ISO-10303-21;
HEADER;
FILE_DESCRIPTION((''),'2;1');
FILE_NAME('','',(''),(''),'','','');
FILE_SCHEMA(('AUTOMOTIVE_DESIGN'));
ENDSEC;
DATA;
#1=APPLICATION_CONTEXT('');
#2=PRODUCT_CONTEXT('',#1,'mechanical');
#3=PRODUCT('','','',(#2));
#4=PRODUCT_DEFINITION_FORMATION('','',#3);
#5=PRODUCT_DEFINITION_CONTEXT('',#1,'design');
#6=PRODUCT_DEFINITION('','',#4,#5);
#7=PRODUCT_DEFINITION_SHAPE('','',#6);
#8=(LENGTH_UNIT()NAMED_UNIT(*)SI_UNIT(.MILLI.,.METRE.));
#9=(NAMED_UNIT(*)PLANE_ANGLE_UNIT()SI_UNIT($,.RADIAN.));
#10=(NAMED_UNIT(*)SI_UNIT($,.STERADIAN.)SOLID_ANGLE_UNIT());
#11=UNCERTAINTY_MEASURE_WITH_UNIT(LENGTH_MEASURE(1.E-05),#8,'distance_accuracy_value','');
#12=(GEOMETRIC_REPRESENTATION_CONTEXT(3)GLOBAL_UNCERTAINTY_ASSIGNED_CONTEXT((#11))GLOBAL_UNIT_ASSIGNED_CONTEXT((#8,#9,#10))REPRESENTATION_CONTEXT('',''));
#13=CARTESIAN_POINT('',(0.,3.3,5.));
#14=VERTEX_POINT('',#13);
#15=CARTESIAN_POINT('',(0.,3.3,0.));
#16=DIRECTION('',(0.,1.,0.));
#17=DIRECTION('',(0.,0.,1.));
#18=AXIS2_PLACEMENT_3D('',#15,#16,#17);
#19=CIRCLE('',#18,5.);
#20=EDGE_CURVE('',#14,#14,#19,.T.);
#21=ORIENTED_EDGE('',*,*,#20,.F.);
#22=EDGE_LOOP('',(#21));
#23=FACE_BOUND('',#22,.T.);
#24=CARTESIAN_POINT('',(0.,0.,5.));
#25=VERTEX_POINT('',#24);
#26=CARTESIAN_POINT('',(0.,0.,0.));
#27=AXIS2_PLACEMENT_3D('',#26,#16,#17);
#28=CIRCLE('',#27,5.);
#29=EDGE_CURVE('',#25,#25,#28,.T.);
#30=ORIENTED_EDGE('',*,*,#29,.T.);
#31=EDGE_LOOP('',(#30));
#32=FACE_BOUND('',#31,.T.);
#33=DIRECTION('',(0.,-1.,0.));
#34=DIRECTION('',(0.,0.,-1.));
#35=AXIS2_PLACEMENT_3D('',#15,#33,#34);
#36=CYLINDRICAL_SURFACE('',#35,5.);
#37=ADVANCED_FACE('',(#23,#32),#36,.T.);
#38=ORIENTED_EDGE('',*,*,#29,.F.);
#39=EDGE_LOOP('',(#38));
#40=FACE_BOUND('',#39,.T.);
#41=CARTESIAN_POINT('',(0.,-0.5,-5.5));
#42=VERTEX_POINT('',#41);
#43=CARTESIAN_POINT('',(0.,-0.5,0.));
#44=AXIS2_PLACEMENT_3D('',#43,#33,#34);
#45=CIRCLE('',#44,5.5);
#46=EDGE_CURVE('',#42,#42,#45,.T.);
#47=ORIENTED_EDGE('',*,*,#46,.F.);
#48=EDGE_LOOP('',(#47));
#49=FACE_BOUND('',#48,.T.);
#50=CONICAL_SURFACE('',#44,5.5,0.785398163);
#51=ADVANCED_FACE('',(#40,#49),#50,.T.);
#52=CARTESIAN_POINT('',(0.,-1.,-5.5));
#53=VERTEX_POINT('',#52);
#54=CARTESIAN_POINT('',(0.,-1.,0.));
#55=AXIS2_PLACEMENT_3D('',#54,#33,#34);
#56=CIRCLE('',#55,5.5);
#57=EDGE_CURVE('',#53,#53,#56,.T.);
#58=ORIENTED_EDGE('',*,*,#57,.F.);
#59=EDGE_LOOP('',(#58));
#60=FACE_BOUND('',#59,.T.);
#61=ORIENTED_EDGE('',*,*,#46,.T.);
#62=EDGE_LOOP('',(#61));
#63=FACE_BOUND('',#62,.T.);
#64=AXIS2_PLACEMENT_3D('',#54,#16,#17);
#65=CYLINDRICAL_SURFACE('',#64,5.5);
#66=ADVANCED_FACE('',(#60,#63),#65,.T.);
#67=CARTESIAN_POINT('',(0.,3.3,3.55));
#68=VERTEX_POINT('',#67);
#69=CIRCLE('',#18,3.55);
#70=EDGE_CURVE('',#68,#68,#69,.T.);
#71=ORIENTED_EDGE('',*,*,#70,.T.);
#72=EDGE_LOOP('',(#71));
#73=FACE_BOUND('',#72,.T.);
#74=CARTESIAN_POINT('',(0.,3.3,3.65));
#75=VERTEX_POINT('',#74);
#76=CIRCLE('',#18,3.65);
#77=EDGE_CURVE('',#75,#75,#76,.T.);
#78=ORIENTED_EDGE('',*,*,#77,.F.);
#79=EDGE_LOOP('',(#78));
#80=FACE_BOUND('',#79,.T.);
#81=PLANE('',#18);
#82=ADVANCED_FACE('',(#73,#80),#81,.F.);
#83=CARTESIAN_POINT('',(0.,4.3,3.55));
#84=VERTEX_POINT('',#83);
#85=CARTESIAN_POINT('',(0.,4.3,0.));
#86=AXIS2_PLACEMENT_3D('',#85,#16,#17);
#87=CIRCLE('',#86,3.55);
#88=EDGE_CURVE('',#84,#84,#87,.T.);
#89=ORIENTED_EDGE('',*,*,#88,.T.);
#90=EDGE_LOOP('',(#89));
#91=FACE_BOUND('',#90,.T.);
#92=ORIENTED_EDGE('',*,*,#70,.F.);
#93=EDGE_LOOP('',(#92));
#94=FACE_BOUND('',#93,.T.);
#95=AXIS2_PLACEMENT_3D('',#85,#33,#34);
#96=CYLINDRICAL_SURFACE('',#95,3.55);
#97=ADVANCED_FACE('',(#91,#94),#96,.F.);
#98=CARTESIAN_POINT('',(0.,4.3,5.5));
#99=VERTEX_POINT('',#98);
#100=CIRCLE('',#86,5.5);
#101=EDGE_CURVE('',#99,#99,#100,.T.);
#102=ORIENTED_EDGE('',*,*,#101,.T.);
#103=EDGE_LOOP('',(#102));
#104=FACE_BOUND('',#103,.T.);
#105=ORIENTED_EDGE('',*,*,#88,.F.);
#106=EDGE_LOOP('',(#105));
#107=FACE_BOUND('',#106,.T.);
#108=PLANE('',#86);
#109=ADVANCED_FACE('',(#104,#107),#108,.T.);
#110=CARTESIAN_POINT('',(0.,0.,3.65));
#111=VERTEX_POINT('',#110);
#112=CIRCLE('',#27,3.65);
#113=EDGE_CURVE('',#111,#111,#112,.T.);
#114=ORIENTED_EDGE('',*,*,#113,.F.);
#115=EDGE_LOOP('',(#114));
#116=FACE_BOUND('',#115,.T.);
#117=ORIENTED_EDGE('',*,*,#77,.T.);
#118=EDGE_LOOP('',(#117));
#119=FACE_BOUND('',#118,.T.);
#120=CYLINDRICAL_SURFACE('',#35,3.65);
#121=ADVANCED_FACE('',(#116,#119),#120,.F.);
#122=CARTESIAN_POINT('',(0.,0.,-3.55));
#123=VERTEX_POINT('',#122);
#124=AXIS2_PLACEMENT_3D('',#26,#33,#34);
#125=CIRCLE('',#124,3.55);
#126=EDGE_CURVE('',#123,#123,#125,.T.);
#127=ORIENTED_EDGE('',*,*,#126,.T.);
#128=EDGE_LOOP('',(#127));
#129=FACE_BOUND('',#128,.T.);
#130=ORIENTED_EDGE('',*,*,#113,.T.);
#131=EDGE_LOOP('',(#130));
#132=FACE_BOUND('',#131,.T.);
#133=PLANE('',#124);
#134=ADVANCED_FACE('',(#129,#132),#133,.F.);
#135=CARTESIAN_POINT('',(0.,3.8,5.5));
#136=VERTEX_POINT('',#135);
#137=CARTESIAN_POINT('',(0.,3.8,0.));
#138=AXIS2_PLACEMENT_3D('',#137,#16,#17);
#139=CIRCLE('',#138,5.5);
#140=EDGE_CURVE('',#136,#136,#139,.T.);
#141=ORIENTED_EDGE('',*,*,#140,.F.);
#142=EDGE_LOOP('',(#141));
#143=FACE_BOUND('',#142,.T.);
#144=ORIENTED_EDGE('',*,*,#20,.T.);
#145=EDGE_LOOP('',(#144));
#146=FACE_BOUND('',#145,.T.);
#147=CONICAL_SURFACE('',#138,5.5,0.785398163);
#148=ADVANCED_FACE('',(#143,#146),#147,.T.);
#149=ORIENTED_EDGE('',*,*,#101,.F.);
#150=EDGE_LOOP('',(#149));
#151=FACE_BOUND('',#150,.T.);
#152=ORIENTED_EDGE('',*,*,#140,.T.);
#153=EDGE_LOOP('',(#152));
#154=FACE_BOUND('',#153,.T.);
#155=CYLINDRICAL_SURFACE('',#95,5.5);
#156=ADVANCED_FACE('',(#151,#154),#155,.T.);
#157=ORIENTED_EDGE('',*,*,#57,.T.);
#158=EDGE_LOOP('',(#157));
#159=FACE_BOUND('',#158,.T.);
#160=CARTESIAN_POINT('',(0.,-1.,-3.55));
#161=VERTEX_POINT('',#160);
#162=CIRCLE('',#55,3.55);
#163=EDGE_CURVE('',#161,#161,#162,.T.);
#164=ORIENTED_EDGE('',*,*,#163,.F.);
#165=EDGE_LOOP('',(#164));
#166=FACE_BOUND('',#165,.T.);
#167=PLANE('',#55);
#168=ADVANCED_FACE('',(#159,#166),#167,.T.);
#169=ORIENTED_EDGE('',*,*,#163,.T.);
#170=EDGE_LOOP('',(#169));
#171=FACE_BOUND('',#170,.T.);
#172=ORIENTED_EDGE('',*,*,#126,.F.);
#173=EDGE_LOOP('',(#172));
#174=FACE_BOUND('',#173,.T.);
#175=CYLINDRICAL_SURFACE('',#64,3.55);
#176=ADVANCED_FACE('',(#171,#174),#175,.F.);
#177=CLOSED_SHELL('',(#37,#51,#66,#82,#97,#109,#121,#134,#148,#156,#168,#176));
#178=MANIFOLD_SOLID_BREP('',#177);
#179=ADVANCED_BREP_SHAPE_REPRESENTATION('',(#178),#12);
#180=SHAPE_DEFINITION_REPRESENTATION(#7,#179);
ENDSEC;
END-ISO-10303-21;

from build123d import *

# Parameters (mm, degrees)
SKETCH_1_R      = 5
SKETCH_1_R_2    = 3.65
EXTRUDE_1_DEPTH = 3.3
SKETCH_2_R      = 5.5
SKETCH_2_R_2    = 3.55
EXTRUDE_2_DEPTH = 1
EXTRUDE_START   = 1
SKETCH_3_R      = 5.5
SKETCH_3_R_2    = 3.55
EXTRUDE_3_DEPTH = 1
CHAMFER_1_SIZE  = 0.5


with BuildPart() as part:
    # 草图1 → 凸台-拉伸1 (new body)
    with BuildSketch(Plane(origin=(0, 0, 0), x_dir=(1, 0, 0), z_dir=(0, 1, 0))):
        with Locations(Location((0, 0, 0), (0, 0, 270))):
            Circle(SKETCH_1_R)
        with Locations(Location((0, 0, 0), (0, 0, 270))):
            Circle(SKETCH_1_R_2, mode=Mode.SUBTRACT)
    extrude(amount=EXTRUDE_1_DEPTH)

    # 草图2 → 凸台-拉伸2 (add)
    with BuildSketch(Plane.XZ):
        with Locations(Location((0, 0, 0), (0, 0, 270))):
            Circle(SKETCH_2_R)
        with Locations(Location((0, 0, 0), (0, 0, 270))):
            Circle(SKETCH_2_R_2, mode=Mode.SUBTRACT)
    extrude(amount=EXTRUDE_2_DEPTH)

    # 草图3 → 凸台-拉伸3 (add)
    with BuildSketch(Plane(origin=(0, 3.3, 0), x_dir=(1, 0, 0), z_dir=(0, 1, 0)).offset(EXTRUDE_START)):
        with Locations(Location((0, 0, 0), (0, 0, 90))):
            Circle(SKETCH_3_R)
        with Locations(Location((0, 0, 0), (0, 0, 90))):
            Circle(SKETCH_3_R_2, mode=Mode.SUBTRACT)
    extrude(amount=-EXTRUDE_3_DEPTH)

    # 倒角1
    chamfer_1_edges = [part.edges().sort_by_distance(p)[0] for p in [
        (0, 0, 5.5),
        (0, 3.3, 5.5),
    ]]
    chamfer(chamfer_1_edges, length=CHAMFER_1_SIZE - 0.0001)  # a hair under: the kernel refuses the full size


solid = part.part
